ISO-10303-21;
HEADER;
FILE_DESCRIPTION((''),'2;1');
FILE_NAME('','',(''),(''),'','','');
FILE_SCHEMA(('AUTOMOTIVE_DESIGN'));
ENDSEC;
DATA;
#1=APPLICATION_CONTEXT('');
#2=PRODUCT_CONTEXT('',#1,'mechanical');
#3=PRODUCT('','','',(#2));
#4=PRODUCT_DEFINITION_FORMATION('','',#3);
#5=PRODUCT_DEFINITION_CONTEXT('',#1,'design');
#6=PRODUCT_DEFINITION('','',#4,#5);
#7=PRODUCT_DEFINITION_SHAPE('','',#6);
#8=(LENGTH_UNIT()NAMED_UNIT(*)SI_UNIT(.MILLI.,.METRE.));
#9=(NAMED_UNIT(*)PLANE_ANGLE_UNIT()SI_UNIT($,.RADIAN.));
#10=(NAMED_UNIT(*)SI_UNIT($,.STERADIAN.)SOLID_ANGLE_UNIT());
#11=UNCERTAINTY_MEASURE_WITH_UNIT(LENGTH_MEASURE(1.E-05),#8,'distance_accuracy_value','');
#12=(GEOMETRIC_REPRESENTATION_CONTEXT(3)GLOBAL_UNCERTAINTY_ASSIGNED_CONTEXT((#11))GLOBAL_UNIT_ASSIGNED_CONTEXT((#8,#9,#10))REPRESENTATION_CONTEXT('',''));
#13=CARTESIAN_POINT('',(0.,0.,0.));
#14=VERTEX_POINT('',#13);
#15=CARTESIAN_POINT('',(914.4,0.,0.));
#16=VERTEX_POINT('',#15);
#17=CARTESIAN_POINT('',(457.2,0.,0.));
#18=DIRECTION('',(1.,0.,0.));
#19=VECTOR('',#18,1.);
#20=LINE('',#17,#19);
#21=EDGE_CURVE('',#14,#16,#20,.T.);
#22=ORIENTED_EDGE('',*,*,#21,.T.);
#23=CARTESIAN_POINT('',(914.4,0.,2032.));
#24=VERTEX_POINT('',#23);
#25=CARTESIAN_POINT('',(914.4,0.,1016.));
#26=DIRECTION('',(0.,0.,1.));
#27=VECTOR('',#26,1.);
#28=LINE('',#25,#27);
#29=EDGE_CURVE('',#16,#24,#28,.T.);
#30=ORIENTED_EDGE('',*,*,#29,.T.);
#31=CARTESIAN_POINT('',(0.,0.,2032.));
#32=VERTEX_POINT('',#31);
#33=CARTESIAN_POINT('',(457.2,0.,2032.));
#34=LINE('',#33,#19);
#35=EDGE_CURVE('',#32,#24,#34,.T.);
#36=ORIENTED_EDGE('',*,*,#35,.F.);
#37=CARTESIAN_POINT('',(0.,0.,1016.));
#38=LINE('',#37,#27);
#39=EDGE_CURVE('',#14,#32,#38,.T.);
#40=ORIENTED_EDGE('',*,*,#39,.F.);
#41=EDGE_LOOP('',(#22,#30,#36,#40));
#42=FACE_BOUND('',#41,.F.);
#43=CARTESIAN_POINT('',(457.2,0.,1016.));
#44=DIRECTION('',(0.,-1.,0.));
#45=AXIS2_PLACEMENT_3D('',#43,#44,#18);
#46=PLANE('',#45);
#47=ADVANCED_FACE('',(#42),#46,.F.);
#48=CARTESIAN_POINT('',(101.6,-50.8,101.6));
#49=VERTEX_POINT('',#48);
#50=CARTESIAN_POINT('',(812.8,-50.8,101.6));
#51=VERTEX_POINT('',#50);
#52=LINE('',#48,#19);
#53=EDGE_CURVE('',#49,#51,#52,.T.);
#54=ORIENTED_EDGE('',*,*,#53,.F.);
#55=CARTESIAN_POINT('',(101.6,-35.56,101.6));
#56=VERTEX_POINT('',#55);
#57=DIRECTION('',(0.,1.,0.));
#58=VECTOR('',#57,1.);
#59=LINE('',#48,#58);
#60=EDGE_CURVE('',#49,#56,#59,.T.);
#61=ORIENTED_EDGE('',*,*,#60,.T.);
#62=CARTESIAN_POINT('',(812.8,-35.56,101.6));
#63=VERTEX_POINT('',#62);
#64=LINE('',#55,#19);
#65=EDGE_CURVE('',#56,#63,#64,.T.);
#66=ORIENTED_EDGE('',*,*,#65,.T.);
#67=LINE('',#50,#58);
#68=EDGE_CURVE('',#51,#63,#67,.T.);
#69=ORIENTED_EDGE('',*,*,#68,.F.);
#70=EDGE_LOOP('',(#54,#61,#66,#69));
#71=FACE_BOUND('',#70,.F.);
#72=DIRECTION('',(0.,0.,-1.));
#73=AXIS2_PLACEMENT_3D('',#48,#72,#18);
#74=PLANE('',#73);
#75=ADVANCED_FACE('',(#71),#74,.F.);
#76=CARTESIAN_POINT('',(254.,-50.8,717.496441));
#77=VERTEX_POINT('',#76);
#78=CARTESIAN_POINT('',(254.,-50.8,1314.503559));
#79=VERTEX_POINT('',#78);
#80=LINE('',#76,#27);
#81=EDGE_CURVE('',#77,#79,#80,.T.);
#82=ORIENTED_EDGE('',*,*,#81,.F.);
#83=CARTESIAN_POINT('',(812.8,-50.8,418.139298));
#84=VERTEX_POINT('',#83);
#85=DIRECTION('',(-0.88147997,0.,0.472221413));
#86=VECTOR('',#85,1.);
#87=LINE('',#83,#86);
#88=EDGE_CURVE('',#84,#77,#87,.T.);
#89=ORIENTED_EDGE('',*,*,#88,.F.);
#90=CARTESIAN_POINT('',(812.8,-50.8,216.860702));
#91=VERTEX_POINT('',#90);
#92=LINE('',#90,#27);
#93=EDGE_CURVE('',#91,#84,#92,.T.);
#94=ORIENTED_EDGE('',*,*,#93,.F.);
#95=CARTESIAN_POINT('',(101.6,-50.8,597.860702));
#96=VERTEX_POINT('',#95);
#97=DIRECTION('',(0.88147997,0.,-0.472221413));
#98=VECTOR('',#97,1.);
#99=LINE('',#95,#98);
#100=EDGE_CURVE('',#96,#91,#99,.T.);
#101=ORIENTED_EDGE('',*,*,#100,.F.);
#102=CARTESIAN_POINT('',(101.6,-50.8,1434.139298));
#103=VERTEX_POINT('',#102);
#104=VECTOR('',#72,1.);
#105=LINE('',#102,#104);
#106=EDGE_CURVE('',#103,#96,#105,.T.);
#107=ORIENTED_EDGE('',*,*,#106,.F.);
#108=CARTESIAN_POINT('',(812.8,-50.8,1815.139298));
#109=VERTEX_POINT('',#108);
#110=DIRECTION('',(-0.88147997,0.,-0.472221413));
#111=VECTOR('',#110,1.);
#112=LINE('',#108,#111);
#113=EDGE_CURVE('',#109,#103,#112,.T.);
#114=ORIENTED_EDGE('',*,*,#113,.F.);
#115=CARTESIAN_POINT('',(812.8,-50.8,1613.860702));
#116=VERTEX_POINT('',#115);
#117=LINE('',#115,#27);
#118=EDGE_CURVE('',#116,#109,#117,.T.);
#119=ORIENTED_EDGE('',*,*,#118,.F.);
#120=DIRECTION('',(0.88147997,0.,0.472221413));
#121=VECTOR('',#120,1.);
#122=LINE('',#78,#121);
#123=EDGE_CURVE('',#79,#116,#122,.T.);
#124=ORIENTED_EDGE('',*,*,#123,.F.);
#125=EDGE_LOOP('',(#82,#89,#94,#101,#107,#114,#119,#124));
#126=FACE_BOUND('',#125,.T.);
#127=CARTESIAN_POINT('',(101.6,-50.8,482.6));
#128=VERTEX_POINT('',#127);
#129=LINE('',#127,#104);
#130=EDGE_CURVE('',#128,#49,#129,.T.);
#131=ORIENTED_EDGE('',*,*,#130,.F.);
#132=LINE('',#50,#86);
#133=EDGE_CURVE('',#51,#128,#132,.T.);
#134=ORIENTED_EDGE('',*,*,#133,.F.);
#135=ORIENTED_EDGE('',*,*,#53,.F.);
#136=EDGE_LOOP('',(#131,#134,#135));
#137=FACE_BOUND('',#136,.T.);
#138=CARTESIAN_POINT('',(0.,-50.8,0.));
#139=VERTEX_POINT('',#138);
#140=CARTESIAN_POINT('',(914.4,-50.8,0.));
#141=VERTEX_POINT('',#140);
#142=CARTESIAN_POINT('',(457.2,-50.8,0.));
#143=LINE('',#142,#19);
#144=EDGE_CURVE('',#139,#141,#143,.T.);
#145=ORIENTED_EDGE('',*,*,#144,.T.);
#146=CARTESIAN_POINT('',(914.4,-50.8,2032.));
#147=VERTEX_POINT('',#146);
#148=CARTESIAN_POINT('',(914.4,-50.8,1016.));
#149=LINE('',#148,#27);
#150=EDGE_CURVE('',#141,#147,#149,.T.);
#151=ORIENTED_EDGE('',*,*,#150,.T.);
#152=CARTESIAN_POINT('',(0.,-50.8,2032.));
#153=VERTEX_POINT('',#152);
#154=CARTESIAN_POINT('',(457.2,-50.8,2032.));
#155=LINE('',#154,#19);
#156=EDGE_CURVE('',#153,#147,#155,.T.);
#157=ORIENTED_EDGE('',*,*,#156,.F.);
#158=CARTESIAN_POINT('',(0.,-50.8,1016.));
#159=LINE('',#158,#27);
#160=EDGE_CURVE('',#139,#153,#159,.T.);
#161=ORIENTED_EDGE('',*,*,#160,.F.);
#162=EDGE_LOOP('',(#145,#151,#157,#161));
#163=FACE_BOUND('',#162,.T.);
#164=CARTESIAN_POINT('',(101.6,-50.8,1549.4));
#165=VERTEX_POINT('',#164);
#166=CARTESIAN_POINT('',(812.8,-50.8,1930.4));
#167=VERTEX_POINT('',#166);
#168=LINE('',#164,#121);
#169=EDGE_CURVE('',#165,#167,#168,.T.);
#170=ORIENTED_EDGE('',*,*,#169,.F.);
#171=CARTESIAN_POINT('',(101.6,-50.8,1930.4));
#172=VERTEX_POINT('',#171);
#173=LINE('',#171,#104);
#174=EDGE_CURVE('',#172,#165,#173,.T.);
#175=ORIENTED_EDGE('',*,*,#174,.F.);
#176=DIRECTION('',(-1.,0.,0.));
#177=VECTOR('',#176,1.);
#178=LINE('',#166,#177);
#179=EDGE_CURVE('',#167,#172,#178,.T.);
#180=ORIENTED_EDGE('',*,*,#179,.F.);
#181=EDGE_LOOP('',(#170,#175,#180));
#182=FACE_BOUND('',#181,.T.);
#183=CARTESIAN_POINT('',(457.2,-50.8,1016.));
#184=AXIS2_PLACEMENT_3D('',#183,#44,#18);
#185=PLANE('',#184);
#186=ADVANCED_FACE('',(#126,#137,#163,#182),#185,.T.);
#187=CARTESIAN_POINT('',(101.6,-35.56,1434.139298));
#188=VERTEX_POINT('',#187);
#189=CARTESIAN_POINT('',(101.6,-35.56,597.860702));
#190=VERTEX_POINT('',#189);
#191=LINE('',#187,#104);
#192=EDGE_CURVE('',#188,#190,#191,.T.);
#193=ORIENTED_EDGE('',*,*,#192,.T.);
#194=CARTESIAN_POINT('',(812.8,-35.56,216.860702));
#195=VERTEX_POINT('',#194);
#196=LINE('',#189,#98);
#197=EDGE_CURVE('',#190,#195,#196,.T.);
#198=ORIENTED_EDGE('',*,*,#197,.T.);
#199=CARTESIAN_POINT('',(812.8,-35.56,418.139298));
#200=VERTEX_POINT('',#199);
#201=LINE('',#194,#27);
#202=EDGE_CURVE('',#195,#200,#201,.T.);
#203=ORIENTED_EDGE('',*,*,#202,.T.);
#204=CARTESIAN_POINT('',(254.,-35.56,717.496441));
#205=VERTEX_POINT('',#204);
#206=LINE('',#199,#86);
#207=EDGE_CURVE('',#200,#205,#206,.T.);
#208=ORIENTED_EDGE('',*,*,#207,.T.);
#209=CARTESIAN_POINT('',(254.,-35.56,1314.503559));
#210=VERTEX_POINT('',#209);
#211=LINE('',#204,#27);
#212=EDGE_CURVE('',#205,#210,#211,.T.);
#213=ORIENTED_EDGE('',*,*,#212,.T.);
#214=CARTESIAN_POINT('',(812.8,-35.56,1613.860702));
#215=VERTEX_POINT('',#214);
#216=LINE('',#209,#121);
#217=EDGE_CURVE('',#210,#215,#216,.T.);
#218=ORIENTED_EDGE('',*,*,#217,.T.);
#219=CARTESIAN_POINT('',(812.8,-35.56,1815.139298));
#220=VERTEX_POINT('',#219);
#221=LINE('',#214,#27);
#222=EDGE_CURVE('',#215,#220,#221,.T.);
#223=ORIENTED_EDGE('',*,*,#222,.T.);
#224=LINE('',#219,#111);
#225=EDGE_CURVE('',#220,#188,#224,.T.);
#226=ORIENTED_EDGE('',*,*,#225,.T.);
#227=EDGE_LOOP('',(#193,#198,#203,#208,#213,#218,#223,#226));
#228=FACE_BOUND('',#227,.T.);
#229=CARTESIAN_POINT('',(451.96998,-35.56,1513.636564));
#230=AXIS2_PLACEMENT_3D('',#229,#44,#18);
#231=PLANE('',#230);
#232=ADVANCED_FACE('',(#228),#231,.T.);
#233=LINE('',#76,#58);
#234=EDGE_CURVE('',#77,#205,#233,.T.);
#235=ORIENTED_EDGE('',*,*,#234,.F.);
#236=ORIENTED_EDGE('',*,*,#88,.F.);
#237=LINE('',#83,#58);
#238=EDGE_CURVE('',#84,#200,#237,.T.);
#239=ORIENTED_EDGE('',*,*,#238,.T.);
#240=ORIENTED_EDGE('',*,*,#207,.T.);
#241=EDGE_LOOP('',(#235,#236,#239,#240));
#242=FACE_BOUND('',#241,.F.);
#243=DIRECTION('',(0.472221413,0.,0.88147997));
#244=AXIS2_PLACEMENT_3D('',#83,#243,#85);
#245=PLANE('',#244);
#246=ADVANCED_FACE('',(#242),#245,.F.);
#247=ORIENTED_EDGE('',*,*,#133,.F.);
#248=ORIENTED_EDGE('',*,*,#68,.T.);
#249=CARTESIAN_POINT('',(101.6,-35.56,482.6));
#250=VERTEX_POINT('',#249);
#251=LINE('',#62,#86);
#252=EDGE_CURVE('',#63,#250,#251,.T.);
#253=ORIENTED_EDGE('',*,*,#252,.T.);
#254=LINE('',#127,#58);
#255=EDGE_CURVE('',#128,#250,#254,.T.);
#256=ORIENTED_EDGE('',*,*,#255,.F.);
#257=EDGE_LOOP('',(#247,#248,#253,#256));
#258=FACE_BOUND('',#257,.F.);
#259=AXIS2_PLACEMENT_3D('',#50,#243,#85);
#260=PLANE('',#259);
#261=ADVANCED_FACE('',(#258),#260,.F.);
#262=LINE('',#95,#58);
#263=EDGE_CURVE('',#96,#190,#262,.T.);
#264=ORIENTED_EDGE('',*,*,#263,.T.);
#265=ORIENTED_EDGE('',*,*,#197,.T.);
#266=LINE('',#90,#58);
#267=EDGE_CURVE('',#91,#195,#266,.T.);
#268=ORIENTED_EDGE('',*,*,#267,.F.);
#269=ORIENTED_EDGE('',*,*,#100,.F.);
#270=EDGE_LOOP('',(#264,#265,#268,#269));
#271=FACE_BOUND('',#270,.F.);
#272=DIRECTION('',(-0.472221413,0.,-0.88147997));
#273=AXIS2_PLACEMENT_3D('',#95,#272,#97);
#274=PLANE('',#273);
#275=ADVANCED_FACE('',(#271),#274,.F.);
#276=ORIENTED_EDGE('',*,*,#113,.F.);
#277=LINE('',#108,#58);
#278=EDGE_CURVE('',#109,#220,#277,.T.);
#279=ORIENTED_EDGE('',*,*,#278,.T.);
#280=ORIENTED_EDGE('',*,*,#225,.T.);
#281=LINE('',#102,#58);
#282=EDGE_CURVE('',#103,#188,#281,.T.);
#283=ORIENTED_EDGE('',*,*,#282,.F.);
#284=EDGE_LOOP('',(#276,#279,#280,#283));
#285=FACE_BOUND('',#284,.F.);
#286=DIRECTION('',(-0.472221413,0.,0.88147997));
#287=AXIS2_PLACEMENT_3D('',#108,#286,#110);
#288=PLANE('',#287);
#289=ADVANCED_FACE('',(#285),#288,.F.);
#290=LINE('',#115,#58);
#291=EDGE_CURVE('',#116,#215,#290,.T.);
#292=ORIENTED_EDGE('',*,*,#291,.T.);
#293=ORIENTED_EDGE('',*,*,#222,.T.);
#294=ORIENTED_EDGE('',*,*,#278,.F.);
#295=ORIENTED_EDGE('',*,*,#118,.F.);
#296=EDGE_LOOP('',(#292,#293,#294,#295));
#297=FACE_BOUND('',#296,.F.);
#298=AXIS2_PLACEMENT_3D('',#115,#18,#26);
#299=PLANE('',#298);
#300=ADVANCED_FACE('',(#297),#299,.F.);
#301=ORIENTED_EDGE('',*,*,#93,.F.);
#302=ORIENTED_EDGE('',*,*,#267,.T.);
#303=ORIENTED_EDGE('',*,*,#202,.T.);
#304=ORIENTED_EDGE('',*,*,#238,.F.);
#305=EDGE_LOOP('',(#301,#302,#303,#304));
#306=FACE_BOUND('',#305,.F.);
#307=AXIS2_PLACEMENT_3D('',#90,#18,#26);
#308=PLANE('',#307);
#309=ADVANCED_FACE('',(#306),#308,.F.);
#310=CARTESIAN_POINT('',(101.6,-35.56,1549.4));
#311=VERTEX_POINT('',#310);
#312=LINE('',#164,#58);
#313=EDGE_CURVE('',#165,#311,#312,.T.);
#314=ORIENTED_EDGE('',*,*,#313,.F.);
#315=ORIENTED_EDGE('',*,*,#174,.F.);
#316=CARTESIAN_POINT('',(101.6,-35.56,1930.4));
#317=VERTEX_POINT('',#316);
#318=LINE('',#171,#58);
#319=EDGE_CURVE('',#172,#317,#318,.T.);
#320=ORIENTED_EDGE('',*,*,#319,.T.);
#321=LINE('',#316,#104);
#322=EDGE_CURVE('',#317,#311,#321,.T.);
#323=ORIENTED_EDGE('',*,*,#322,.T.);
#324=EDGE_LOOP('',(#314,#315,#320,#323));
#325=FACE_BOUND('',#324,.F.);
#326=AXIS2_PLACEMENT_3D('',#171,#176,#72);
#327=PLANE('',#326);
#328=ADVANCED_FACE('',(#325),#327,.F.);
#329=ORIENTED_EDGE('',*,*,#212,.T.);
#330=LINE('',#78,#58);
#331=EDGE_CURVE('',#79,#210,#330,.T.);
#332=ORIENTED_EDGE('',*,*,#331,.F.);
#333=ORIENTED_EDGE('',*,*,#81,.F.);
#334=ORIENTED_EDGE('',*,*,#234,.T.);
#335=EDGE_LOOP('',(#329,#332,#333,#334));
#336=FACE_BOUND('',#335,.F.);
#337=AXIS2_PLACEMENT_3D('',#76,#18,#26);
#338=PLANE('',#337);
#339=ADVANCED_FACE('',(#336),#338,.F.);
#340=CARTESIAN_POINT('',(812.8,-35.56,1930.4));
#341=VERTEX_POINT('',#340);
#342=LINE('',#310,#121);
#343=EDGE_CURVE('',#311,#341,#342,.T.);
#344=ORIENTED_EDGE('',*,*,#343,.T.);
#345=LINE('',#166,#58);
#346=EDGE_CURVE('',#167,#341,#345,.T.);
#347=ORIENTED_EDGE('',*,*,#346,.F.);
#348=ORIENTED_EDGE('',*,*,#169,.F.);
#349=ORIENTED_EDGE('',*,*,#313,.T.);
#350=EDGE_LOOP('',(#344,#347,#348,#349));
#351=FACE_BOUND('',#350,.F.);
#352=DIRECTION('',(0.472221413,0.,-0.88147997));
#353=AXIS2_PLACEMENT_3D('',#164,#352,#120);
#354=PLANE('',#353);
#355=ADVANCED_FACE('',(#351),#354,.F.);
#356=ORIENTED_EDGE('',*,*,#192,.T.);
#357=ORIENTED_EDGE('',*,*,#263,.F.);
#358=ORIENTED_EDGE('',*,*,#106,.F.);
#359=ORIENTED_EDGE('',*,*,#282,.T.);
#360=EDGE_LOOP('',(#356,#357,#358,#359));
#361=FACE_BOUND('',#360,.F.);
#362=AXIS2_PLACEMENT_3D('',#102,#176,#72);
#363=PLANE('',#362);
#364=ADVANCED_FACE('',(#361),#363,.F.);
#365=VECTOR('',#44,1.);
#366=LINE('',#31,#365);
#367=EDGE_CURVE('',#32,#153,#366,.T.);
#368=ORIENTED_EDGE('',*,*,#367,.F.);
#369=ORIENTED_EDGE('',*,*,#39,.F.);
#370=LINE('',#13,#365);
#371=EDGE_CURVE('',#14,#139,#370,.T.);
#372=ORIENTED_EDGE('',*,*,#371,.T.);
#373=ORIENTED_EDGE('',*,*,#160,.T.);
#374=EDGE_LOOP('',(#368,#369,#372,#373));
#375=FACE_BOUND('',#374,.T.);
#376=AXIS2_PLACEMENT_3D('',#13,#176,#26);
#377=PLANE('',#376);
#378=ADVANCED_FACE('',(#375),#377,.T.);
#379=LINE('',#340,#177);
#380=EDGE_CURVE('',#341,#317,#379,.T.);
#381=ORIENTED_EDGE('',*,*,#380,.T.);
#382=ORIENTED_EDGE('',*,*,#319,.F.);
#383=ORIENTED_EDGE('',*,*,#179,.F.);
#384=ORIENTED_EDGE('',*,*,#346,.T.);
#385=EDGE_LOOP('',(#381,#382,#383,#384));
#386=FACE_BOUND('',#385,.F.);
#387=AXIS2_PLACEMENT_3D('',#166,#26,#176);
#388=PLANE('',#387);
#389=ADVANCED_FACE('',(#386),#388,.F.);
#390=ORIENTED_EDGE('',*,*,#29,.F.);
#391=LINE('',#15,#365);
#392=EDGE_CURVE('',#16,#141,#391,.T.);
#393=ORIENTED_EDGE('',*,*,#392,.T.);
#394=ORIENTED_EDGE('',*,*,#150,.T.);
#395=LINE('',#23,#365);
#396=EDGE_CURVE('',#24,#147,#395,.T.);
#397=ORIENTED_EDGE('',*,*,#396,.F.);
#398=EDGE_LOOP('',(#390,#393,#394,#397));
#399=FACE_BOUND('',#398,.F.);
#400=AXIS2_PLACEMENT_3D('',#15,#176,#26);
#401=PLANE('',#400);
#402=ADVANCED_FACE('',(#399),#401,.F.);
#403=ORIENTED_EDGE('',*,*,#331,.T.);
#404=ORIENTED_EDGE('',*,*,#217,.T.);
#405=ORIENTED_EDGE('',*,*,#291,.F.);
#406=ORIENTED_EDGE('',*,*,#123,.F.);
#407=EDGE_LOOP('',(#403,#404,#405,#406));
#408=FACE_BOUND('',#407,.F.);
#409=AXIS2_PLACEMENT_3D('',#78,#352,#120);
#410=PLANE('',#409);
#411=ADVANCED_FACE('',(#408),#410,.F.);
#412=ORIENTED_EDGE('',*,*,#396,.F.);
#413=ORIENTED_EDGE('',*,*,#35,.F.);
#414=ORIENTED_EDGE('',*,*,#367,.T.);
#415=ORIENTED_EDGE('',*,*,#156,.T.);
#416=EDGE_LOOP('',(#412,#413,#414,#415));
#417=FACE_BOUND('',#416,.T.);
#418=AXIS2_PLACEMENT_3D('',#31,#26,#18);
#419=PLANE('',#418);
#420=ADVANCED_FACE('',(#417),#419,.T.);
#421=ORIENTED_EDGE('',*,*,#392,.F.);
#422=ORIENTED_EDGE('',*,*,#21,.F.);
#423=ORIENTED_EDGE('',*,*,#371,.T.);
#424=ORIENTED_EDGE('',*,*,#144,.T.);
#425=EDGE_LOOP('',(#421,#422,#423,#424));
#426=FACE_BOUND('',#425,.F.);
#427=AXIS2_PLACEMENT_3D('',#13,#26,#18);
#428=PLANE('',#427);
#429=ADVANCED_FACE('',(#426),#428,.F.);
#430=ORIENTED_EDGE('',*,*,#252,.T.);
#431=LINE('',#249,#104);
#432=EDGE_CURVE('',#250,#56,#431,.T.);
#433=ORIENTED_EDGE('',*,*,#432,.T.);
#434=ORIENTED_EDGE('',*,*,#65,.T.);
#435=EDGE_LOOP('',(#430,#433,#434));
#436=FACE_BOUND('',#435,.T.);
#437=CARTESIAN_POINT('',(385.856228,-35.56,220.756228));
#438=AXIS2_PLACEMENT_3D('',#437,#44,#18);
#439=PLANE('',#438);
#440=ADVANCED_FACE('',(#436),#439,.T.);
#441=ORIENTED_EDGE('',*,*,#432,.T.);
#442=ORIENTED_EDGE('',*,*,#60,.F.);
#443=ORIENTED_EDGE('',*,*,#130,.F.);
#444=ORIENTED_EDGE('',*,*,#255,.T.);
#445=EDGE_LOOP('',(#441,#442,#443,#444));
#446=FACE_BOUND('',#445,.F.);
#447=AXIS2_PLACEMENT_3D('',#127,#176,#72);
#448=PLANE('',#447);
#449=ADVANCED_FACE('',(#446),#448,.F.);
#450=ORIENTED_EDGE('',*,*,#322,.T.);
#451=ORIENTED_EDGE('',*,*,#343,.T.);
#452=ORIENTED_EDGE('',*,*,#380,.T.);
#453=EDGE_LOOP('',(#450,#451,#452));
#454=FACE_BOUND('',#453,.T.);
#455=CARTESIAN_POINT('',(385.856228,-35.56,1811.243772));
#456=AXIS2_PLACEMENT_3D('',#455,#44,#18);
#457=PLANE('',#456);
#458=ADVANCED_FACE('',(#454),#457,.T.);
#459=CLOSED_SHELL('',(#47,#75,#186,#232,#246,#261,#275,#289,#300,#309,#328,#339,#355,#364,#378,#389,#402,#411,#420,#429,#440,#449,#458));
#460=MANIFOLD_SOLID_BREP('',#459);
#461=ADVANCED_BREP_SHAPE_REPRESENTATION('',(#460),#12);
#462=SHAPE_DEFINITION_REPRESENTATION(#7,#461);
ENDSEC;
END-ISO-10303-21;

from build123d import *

# Parameters (mm, degrees)
F0_W     = 914.4
F0_H     = 2032
F1_DEPTH = 50.8
F2_W     = 152.4
F2_H     = 433.7214036722
F3_DEPTH = 15.24


with BuildPart() as f1:
    # F0 (on Front) → F1 (new body)
    with BuildSketch(Plane.XZ):
        with Locations((457.2, 1016)):
            Rectangle(F0_W, F0_H)
    extrude(amount=F1_DEPTH)

    # F2 (on face) → F3 (cut)
    with BuildSketch(Plane.XZ.offset(50.8)):
        Polygon((812.8, 1815.1392981639), (101.6, 1434.1392981639), (101.6, 1232.8607018361), (254, 1232.8607018361), (254, 1314.503558979), (812.8, 1613.8607018361), align=None)
        with Locations((177.8, 1016)):
            Rectangle(F2_W, F2_H)
        Polygon((812.8, 1930.4), (101.6, 1930.4), (101.6, 1549.4), align=None)
        Polygon((254, 799.1392981639), (101.6, 799.1392981639), (101.6, 597.8607018361), (812.8, 216.8607018361), (812.8, 418.1392981639), (254, 717.496441021), align=None)
        Polygon((101.6, 101.6), (812.8, 101.6), (101.6, 482.6), align=None)
    extrude(amount=-F3_DEPTH, mode=Mode.SUBTRACT)


solid = f1.part
